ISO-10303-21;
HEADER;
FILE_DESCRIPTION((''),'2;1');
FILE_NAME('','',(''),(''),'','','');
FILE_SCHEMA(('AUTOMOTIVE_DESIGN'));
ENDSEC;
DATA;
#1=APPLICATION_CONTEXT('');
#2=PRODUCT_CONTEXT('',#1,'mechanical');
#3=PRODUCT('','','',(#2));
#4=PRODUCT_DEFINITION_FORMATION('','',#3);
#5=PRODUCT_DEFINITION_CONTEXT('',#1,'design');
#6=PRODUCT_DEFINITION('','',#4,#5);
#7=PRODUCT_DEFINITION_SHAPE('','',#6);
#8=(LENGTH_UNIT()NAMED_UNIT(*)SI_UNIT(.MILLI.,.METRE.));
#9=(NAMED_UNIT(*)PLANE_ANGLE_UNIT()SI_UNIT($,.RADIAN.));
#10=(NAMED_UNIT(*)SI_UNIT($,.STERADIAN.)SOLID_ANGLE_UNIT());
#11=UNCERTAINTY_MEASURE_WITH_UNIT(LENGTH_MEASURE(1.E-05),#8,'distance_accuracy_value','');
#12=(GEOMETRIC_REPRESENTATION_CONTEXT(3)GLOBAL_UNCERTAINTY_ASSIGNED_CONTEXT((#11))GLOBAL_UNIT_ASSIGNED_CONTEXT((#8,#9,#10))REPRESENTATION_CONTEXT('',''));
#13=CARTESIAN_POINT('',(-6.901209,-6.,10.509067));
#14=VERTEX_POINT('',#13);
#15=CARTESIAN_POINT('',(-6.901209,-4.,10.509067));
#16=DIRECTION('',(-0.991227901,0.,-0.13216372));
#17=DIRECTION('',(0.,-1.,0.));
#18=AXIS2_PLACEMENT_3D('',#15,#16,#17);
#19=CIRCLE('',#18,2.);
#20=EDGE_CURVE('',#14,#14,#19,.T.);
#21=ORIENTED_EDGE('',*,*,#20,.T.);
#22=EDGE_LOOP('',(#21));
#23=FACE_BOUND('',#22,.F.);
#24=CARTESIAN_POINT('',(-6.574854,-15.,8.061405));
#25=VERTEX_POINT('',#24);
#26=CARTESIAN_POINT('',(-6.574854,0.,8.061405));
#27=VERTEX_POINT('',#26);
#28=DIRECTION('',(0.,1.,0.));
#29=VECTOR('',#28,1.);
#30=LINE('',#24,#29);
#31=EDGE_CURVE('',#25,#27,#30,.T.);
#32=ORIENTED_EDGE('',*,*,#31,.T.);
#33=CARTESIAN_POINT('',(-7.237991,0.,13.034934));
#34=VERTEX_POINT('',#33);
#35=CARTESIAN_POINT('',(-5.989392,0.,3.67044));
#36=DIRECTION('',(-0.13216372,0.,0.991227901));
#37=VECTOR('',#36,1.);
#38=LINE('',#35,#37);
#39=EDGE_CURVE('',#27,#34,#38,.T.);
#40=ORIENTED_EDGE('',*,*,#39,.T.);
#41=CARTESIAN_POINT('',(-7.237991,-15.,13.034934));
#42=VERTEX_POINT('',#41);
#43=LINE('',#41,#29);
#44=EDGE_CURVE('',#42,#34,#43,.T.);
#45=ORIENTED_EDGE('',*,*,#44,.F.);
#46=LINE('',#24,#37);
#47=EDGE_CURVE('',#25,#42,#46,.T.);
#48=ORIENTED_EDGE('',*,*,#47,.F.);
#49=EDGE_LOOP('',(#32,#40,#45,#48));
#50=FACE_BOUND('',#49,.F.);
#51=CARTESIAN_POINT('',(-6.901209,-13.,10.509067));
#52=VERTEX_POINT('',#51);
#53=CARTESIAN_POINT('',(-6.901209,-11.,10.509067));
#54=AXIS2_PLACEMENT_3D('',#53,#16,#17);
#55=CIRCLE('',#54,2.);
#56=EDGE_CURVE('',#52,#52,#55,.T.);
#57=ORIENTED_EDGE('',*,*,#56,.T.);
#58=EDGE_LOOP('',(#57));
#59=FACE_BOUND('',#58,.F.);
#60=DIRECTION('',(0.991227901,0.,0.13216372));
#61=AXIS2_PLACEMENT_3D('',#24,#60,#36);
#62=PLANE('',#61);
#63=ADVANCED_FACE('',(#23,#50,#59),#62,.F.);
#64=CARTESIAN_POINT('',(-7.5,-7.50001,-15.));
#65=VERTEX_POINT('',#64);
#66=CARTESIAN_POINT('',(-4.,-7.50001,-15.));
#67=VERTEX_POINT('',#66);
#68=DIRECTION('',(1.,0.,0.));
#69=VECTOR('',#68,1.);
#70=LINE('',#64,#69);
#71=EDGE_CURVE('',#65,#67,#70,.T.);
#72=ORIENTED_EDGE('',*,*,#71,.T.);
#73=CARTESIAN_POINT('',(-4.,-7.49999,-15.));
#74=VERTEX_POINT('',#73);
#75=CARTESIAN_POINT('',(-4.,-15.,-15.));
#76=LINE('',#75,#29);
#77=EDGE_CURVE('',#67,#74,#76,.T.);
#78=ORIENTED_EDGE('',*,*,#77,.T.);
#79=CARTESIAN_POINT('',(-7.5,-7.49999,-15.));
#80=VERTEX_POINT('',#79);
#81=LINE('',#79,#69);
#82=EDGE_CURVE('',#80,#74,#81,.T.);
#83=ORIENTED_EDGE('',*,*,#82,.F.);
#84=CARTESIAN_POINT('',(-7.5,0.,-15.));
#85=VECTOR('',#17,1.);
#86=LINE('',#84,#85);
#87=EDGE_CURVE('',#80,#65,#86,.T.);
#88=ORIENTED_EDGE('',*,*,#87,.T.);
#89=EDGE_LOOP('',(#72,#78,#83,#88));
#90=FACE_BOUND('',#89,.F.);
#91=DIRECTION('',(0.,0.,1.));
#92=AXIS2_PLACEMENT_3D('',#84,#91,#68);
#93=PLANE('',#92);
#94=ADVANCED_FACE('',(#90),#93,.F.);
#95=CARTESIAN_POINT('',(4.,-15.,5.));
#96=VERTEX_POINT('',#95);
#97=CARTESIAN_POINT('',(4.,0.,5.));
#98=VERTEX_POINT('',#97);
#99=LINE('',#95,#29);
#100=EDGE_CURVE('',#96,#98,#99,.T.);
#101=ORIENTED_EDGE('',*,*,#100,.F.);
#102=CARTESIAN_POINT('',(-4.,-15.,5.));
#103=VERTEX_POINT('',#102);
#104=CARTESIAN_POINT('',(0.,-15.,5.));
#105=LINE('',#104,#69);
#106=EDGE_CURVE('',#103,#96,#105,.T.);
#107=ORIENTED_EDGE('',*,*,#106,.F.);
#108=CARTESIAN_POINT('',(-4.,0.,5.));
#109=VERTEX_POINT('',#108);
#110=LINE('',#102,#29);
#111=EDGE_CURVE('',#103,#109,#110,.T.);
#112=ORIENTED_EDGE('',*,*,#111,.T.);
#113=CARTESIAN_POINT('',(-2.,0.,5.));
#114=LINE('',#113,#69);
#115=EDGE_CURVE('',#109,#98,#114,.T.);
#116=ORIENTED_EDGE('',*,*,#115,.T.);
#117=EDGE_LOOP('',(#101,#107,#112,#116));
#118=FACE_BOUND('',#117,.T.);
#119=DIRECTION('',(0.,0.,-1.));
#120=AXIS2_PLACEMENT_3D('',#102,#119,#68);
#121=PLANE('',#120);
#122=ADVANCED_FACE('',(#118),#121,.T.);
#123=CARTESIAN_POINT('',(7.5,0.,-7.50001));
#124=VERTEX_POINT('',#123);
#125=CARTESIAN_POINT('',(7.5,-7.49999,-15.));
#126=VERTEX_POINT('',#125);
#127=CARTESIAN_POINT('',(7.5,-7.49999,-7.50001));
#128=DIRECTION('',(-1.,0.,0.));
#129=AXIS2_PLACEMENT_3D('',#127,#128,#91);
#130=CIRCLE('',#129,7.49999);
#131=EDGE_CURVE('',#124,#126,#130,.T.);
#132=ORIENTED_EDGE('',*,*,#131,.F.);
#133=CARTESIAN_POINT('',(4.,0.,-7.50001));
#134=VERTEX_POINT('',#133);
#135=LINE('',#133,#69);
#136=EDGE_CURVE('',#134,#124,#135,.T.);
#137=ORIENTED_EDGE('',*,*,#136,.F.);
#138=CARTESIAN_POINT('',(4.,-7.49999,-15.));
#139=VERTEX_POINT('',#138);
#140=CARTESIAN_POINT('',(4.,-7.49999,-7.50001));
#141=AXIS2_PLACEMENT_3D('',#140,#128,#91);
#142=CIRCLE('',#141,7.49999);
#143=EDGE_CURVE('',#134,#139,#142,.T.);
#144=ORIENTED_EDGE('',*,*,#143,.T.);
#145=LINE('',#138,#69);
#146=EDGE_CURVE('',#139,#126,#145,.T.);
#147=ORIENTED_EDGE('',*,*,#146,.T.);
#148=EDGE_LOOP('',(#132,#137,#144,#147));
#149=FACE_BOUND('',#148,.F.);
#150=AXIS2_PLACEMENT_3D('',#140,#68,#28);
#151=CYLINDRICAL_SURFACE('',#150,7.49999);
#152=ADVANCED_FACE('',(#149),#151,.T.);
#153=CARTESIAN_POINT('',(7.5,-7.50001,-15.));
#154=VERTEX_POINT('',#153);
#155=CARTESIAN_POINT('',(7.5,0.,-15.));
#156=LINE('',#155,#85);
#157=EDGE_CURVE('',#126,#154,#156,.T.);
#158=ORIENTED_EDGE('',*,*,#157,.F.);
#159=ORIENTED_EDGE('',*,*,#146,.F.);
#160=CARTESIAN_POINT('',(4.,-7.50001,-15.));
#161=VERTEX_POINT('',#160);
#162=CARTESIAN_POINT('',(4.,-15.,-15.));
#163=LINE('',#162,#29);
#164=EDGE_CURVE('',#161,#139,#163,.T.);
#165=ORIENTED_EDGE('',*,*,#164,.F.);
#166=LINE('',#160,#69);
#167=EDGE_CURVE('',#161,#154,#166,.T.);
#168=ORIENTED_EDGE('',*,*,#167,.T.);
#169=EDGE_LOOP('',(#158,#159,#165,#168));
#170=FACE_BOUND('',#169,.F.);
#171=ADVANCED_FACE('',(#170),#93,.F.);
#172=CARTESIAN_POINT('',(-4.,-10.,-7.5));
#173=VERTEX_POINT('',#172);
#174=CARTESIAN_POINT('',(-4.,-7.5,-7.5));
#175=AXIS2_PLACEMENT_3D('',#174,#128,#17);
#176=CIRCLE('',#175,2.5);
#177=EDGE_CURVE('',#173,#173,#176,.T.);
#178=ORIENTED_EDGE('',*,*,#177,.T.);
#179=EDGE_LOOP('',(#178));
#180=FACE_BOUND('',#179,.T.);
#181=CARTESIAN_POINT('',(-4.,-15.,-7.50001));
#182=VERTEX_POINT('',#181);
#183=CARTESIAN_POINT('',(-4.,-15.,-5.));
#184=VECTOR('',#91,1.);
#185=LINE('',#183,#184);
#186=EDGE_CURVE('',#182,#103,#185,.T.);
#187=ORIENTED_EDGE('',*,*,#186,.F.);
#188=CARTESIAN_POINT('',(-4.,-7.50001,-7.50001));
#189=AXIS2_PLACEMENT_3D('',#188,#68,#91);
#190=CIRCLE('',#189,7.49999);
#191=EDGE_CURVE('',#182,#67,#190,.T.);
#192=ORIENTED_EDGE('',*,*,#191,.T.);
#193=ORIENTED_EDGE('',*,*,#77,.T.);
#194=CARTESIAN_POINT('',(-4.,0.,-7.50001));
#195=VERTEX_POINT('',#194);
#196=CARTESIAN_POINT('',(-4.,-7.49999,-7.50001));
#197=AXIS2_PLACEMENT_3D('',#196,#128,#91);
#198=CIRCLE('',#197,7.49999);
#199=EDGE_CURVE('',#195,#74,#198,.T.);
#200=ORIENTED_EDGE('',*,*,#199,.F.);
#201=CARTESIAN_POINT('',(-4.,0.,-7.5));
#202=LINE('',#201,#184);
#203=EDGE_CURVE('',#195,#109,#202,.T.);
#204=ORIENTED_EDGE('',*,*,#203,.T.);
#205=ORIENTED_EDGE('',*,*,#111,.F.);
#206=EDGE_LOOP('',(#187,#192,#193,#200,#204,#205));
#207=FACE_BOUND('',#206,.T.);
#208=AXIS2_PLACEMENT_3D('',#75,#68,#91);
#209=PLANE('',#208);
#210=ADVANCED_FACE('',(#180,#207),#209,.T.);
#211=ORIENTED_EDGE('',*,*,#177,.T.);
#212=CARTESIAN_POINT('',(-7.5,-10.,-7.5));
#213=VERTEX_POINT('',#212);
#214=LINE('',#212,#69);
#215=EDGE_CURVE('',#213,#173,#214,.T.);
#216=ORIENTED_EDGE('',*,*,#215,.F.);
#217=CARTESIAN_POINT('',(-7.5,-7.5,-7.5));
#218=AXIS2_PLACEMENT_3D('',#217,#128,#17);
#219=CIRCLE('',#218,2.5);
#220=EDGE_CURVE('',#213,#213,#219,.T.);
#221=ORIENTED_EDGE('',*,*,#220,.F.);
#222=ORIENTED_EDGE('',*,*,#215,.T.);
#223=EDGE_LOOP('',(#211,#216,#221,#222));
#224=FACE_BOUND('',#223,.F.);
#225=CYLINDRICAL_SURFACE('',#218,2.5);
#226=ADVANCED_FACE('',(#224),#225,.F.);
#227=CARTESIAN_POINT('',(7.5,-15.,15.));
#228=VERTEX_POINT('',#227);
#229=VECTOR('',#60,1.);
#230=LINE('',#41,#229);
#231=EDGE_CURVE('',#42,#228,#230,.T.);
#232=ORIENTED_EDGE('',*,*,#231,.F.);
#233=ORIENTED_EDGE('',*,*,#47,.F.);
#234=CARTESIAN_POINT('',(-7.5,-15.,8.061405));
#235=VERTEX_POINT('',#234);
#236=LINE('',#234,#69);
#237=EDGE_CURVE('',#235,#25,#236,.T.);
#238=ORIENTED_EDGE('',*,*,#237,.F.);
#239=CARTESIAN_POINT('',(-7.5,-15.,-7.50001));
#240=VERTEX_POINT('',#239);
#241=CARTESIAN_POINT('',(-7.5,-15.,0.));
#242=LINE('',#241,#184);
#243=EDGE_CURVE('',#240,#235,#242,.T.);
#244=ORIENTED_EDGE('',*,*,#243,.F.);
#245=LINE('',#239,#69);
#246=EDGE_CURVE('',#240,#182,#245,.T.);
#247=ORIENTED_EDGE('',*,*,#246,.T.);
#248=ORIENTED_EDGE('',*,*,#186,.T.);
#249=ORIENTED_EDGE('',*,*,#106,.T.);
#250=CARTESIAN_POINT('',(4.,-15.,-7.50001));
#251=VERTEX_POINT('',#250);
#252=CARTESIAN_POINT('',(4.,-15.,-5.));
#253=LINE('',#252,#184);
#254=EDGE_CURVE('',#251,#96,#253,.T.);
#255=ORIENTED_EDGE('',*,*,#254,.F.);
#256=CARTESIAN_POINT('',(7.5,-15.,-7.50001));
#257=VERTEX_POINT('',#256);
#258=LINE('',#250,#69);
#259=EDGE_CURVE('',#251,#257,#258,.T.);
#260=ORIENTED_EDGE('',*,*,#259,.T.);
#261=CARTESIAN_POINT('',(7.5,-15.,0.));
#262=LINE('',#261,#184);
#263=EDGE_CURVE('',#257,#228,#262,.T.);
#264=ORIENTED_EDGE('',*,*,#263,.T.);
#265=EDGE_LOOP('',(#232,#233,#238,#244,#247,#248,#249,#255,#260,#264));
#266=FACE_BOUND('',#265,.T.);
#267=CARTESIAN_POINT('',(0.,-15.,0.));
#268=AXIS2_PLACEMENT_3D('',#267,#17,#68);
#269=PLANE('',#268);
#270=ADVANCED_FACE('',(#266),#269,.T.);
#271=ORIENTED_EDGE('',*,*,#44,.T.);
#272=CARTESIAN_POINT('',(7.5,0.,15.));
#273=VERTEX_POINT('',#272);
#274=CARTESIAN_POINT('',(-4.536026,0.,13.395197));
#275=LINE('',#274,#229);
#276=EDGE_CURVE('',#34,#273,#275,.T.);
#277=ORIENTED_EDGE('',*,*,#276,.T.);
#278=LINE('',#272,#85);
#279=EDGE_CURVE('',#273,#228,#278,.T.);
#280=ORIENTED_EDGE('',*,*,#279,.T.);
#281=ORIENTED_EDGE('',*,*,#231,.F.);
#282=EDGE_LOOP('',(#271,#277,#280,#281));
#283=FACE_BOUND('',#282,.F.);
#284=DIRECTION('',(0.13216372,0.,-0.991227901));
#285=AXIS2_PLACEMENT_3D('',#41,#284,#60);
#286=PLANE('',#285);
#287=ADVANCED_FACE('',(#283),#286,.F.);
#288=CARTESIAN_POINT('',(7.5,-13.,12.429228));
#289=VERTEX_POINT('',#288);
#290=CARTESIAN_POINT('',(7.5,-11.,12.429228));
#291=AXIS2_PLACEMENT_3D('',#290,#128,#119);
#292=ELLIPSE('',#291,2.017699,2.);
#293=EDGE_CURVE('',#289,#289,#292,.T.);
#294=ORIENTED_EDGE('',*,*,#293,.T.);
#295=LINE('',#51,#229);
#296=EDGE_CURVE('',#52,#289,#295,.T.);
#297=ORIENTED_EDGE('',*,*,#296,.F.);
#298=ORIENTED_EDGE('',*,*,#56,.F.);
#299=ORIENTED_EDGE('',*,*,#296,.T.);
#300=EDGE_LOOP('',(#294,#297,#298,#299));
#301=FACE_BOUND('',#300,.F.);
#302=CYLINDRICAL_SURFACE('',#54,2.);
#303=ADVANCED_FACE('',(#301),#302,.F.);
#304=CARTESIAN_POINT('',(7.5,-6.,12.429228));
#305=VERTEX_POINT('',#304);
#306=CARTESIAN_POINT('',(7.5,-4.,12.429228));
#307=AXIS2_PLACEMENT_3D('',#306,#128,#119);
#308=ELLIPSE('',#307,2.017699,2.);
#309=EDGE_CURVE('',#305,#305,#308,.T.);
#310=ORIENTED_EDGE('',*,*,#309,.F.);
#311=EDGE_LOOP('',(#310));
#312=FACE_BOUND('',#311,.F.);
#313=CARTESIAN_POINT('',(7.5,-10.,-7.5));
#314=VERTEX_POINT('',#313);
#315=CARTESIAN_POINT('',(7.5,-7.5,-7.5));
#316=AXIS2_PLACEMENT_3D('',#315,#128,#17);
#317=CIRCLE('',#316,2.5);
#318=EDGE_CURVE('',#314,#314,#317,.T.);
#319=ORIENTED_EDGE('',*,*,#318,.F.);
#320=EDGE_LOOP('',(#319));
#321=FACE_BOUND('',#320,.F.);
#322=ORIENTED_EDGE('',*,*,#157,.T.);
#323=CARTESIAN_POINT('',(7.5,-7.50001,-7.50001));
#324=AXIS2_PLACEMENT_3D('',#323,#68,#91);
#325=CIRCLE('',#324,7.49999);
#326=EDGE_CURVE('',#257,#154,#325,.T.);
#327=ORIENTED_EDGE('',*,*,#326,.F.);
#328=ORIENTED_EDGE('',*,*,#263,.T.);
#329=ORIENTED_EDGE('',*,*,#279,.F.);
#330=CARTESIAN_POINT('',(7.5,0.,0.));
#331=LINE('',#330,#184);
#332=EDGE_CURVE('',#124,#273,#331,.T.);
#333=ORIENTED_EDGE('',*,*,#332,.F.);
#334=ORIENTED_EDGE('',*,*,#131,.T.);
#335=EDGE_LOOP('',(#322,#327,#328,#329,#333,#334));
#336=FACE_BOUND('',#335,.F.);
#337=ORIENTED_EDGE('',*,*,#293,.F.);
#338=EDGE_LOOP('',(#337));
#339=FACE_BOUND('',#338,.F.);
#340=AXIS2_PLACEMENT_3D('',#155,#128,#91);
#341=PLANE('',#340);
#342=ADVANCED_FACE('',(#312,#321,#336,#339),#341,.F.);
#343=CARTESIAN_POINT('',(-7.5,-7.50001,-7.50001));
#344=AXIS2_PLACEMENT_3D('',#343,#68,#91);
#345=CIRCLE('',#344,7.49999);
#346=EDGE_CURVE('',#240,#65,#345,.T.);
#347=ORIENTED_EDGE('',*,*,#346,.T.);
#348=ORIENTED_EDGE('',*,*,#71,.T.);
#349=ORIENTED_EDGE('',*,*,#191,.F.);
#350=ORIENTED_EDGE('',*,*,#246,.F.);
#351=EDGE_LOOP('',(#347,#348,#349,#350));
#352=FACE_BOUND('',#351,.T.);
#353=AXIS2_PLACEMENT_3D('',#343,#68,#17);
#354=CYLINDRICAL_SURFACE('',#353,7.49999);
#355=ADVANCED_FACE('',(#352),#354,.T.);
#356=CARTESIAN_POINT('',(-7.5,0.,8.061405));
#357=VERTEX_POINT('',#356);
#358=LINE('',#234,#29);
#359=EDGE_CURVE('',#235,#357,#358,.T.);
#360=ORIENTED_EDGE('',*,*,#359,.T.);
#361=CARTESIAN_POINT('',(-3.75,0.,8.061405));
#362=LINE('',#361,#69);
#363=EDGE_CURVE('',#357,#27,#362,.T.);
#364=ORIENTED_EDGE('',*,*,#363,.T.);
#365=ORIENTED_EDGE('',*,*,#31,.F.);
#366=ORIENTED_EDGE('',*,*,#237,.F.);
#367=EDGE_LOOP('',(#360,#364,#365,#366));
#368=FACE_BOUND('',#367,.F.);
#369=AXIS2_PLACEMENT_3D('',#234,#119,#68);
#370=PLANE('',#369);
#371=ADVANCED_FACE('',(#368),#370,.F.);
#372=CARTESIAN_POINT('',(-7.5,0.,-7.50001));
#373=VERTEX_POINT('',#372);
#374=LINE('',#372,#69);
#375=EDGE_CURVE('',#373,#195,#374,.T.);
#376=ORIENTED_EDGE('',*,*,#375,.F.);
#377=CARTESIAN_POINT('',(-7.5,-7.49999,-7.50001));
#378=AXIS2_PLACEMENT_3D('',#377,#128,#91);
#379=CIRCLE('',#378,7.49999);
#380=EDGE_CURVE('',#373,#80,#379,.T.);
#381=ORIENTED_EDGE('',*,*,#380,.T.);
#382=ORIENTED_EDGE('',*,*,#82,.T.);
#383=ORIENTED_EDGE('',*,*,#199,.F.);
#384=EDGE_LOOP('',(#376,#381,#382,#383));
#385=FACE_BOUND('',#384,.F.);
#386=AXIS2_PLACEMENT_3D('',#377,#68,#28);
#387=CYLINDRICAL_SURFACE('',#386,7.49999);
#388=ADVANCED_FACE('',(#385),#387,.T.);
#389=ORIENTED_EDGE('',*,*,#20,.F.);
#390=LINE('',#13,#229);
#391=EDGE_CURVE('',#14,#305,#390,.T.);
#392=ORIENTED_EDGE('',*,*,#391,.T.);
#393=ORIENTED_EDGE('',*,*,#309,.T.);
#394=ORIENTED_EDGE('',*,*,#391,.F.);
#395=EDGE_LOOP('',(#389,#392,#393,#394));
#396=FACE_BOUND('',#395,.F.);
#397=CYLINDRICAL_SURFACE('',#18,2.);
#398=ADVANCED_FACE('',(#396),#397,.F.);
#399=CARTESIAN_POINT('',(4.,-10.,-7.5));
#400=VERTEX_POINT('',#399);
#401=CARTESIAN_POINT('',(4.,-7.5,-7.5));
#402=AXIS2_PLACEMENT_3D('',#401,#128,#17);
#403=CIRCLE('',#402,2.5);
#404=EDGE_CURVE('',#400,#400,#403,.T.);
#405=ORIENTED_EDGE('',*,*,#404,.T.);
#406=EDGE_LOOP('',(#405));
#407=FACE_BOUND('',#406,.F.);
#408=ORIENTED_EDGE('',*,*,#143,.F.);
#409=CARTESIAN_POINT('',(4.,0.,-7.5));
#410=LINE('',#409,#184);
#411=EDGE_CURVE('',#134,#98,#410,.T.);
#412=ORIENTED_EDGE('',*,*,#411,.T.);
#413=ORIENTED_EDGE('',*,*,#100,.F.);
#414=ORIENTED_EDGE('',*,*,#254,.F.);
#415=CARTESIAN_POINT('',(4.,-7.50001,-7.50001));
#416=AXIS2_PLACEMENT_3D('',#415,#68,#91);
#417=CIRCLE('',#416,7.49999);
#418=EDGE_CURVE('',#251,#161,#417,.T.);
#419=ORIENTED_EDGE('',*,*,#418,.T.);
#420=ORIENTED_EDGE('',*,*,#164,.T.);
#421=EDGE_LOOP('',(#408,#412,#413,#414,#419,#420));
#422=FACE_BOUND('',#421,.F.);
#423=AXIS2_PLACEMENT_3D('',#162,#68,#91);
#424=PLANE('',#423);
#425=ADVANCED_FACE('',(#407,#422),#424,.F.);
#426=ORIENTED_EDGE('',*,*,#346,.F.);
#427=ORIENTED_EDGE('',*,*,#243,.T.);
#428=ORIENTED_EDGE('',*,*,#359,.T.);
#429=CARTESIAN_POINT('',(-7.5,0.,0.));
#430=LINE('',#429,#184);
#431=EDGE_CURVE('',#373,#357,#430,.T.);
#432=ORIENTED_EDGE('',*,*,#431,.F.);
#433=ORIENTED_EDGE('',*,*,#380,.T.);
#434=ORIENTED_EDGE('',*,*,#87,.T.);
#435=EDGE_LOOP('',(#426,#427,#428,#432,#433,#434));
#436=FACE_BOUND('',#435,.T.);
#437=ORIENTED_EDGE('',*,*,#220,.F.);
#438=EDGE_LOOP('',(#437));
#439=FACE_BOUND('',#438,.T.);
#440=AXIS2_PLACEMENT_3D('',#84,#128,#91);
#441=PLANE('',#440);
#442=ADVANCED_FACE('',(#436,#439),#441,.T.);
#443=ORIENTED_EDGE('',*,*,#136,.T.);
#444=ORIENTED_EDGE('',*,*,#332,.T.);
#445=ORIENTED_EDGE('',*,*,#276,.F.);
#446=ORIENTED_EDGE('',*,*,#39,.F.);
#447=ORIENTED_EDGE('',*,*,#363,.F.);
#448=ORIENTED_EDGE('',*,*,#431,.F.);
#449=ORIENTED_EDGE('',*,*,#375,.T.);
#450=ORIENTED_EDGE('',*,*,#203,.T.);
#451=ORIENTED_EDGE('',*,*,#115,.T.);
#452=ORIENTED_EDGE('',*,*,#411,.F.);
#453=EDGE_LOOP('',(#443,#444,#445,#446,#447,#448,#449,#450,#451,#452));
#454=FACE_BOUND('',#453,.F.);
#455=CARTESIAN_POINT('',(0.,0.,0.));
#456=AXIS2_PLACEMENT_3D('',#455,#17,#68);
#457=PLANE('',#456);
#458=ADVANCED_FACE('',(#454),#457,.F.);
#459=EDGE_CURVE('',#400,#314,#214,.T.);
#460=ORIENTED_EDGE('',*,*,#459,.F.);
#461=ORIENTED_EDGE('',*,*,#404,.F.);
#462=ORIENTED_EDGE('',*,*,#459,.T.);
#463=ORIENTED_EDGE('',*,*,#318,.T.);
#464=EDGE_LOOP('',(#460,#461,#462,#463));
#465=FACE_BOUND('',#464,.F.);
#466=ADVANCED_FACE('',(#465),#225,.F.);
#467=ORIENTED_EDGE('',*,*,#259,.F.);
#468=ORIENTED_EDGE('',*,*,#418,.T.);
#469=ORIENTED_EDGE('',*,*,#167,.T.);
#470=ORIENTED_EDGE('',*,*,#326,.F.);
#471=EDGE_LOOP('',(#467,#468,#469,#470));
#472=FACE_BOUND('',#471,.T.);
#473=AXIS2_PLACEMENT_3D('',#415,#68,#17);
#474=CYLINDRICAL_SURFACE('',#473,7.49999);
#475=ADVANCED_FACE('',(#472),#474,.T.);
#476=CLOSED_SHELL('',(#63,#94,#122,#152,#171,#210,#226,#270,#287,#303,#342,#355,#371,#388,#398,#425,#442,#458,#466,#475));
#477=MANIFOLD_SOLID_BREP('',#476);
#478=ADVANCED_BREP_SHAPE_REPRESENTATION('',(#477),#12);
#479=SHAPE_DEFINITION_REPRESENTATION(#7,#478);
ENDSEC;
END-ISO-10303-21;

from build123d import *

# Parameters (mm, degrees)
F0_W     = 15
F0_H     = 30
F1_DEPTH = 15
F2_W     = 8
F2_H     = 20
F3_DEPTH = 25.4
F4_R     = 7.49999
F5_R     = 2
F6_DEPTH = 25.4
F7_R     = 2.5
F8_DEPTH = 25.4


# Not quite as in the source:
# - a fillet or chamfer is up to 0.001 mm smaller than in the source, because OpenCascade refuses the exact size


with BuildPart() as f1:
    # F0 (on Front) → F1 (new body)
    with BuildSketch(Plane.XZ):
        Rectangle(F0_W, F0_H)
    extrude(amount=F1_DEPTH)

    # F2 (on face) → F3 (cut)
    with BuildSketch(Plane.XZ.offset(15)):
        with Locations((0, -5)):
            Rectangle(F2_W, F2_H)
        Polygon((-7.5, 15), (-7.5, 13), (-7.2379912664, 13.0349344978), align=None)
        Polygon((-7.2379912664, 13.0349344978), (-7.5, 13), (-7.5, 8.0614046952), (-6.5748539594, 8.0614046952), align=None)
        Polygon((-7.5, 15), (-7.2379912664, 13.0349344978), (7.5, 15), align=None)
    extrude(amount=-F3_DEPTH, mode=Mode.SUBTRACT)

    # F4 (radius 7.5 in the source; OpenCascade refuses exactly that, so slightly less here)
    f4_edges = [f1.edges().sort_by_distance(p)[0] for p in [
        (-5.75, -15, -15),
        (-5.75, 0, -15),
        (5.75, 0, -15),
        (5.75, -15, -15),
    ]]
    fillet(f4_edges, radius=F4_R)

    # F5 (on face) → F6 (cut)
    with BuildSketch(Plane(origin=(-5.403930131, 0, -0.7205240175), x_dir=(0, -1, 0), z_dir=(-0.9912279007, 0, -0.1321637201))):
        with Locations((4, 11.3289700367)):
            Circle(F5_R)
        with Locations((11, 11.3289700367)):
            Circle(F5_R)
    extrude(amount=-F6_DEPTH, mode=Mode.SUBTRACT)

    # F7 (on face) → F8 (cut)
    with BuildSketch(Plane(origin=(-7.5, 0, 0), x_dir=(0, -1, 0), z_dir=(-1, 0, 0))):
        with Locations((7.5, -7.5)):
            Circle(F7_R)
    extrude(amount=-F8_DEPTH, mode=Mode.SUBTRACT)


solid = f1.part
